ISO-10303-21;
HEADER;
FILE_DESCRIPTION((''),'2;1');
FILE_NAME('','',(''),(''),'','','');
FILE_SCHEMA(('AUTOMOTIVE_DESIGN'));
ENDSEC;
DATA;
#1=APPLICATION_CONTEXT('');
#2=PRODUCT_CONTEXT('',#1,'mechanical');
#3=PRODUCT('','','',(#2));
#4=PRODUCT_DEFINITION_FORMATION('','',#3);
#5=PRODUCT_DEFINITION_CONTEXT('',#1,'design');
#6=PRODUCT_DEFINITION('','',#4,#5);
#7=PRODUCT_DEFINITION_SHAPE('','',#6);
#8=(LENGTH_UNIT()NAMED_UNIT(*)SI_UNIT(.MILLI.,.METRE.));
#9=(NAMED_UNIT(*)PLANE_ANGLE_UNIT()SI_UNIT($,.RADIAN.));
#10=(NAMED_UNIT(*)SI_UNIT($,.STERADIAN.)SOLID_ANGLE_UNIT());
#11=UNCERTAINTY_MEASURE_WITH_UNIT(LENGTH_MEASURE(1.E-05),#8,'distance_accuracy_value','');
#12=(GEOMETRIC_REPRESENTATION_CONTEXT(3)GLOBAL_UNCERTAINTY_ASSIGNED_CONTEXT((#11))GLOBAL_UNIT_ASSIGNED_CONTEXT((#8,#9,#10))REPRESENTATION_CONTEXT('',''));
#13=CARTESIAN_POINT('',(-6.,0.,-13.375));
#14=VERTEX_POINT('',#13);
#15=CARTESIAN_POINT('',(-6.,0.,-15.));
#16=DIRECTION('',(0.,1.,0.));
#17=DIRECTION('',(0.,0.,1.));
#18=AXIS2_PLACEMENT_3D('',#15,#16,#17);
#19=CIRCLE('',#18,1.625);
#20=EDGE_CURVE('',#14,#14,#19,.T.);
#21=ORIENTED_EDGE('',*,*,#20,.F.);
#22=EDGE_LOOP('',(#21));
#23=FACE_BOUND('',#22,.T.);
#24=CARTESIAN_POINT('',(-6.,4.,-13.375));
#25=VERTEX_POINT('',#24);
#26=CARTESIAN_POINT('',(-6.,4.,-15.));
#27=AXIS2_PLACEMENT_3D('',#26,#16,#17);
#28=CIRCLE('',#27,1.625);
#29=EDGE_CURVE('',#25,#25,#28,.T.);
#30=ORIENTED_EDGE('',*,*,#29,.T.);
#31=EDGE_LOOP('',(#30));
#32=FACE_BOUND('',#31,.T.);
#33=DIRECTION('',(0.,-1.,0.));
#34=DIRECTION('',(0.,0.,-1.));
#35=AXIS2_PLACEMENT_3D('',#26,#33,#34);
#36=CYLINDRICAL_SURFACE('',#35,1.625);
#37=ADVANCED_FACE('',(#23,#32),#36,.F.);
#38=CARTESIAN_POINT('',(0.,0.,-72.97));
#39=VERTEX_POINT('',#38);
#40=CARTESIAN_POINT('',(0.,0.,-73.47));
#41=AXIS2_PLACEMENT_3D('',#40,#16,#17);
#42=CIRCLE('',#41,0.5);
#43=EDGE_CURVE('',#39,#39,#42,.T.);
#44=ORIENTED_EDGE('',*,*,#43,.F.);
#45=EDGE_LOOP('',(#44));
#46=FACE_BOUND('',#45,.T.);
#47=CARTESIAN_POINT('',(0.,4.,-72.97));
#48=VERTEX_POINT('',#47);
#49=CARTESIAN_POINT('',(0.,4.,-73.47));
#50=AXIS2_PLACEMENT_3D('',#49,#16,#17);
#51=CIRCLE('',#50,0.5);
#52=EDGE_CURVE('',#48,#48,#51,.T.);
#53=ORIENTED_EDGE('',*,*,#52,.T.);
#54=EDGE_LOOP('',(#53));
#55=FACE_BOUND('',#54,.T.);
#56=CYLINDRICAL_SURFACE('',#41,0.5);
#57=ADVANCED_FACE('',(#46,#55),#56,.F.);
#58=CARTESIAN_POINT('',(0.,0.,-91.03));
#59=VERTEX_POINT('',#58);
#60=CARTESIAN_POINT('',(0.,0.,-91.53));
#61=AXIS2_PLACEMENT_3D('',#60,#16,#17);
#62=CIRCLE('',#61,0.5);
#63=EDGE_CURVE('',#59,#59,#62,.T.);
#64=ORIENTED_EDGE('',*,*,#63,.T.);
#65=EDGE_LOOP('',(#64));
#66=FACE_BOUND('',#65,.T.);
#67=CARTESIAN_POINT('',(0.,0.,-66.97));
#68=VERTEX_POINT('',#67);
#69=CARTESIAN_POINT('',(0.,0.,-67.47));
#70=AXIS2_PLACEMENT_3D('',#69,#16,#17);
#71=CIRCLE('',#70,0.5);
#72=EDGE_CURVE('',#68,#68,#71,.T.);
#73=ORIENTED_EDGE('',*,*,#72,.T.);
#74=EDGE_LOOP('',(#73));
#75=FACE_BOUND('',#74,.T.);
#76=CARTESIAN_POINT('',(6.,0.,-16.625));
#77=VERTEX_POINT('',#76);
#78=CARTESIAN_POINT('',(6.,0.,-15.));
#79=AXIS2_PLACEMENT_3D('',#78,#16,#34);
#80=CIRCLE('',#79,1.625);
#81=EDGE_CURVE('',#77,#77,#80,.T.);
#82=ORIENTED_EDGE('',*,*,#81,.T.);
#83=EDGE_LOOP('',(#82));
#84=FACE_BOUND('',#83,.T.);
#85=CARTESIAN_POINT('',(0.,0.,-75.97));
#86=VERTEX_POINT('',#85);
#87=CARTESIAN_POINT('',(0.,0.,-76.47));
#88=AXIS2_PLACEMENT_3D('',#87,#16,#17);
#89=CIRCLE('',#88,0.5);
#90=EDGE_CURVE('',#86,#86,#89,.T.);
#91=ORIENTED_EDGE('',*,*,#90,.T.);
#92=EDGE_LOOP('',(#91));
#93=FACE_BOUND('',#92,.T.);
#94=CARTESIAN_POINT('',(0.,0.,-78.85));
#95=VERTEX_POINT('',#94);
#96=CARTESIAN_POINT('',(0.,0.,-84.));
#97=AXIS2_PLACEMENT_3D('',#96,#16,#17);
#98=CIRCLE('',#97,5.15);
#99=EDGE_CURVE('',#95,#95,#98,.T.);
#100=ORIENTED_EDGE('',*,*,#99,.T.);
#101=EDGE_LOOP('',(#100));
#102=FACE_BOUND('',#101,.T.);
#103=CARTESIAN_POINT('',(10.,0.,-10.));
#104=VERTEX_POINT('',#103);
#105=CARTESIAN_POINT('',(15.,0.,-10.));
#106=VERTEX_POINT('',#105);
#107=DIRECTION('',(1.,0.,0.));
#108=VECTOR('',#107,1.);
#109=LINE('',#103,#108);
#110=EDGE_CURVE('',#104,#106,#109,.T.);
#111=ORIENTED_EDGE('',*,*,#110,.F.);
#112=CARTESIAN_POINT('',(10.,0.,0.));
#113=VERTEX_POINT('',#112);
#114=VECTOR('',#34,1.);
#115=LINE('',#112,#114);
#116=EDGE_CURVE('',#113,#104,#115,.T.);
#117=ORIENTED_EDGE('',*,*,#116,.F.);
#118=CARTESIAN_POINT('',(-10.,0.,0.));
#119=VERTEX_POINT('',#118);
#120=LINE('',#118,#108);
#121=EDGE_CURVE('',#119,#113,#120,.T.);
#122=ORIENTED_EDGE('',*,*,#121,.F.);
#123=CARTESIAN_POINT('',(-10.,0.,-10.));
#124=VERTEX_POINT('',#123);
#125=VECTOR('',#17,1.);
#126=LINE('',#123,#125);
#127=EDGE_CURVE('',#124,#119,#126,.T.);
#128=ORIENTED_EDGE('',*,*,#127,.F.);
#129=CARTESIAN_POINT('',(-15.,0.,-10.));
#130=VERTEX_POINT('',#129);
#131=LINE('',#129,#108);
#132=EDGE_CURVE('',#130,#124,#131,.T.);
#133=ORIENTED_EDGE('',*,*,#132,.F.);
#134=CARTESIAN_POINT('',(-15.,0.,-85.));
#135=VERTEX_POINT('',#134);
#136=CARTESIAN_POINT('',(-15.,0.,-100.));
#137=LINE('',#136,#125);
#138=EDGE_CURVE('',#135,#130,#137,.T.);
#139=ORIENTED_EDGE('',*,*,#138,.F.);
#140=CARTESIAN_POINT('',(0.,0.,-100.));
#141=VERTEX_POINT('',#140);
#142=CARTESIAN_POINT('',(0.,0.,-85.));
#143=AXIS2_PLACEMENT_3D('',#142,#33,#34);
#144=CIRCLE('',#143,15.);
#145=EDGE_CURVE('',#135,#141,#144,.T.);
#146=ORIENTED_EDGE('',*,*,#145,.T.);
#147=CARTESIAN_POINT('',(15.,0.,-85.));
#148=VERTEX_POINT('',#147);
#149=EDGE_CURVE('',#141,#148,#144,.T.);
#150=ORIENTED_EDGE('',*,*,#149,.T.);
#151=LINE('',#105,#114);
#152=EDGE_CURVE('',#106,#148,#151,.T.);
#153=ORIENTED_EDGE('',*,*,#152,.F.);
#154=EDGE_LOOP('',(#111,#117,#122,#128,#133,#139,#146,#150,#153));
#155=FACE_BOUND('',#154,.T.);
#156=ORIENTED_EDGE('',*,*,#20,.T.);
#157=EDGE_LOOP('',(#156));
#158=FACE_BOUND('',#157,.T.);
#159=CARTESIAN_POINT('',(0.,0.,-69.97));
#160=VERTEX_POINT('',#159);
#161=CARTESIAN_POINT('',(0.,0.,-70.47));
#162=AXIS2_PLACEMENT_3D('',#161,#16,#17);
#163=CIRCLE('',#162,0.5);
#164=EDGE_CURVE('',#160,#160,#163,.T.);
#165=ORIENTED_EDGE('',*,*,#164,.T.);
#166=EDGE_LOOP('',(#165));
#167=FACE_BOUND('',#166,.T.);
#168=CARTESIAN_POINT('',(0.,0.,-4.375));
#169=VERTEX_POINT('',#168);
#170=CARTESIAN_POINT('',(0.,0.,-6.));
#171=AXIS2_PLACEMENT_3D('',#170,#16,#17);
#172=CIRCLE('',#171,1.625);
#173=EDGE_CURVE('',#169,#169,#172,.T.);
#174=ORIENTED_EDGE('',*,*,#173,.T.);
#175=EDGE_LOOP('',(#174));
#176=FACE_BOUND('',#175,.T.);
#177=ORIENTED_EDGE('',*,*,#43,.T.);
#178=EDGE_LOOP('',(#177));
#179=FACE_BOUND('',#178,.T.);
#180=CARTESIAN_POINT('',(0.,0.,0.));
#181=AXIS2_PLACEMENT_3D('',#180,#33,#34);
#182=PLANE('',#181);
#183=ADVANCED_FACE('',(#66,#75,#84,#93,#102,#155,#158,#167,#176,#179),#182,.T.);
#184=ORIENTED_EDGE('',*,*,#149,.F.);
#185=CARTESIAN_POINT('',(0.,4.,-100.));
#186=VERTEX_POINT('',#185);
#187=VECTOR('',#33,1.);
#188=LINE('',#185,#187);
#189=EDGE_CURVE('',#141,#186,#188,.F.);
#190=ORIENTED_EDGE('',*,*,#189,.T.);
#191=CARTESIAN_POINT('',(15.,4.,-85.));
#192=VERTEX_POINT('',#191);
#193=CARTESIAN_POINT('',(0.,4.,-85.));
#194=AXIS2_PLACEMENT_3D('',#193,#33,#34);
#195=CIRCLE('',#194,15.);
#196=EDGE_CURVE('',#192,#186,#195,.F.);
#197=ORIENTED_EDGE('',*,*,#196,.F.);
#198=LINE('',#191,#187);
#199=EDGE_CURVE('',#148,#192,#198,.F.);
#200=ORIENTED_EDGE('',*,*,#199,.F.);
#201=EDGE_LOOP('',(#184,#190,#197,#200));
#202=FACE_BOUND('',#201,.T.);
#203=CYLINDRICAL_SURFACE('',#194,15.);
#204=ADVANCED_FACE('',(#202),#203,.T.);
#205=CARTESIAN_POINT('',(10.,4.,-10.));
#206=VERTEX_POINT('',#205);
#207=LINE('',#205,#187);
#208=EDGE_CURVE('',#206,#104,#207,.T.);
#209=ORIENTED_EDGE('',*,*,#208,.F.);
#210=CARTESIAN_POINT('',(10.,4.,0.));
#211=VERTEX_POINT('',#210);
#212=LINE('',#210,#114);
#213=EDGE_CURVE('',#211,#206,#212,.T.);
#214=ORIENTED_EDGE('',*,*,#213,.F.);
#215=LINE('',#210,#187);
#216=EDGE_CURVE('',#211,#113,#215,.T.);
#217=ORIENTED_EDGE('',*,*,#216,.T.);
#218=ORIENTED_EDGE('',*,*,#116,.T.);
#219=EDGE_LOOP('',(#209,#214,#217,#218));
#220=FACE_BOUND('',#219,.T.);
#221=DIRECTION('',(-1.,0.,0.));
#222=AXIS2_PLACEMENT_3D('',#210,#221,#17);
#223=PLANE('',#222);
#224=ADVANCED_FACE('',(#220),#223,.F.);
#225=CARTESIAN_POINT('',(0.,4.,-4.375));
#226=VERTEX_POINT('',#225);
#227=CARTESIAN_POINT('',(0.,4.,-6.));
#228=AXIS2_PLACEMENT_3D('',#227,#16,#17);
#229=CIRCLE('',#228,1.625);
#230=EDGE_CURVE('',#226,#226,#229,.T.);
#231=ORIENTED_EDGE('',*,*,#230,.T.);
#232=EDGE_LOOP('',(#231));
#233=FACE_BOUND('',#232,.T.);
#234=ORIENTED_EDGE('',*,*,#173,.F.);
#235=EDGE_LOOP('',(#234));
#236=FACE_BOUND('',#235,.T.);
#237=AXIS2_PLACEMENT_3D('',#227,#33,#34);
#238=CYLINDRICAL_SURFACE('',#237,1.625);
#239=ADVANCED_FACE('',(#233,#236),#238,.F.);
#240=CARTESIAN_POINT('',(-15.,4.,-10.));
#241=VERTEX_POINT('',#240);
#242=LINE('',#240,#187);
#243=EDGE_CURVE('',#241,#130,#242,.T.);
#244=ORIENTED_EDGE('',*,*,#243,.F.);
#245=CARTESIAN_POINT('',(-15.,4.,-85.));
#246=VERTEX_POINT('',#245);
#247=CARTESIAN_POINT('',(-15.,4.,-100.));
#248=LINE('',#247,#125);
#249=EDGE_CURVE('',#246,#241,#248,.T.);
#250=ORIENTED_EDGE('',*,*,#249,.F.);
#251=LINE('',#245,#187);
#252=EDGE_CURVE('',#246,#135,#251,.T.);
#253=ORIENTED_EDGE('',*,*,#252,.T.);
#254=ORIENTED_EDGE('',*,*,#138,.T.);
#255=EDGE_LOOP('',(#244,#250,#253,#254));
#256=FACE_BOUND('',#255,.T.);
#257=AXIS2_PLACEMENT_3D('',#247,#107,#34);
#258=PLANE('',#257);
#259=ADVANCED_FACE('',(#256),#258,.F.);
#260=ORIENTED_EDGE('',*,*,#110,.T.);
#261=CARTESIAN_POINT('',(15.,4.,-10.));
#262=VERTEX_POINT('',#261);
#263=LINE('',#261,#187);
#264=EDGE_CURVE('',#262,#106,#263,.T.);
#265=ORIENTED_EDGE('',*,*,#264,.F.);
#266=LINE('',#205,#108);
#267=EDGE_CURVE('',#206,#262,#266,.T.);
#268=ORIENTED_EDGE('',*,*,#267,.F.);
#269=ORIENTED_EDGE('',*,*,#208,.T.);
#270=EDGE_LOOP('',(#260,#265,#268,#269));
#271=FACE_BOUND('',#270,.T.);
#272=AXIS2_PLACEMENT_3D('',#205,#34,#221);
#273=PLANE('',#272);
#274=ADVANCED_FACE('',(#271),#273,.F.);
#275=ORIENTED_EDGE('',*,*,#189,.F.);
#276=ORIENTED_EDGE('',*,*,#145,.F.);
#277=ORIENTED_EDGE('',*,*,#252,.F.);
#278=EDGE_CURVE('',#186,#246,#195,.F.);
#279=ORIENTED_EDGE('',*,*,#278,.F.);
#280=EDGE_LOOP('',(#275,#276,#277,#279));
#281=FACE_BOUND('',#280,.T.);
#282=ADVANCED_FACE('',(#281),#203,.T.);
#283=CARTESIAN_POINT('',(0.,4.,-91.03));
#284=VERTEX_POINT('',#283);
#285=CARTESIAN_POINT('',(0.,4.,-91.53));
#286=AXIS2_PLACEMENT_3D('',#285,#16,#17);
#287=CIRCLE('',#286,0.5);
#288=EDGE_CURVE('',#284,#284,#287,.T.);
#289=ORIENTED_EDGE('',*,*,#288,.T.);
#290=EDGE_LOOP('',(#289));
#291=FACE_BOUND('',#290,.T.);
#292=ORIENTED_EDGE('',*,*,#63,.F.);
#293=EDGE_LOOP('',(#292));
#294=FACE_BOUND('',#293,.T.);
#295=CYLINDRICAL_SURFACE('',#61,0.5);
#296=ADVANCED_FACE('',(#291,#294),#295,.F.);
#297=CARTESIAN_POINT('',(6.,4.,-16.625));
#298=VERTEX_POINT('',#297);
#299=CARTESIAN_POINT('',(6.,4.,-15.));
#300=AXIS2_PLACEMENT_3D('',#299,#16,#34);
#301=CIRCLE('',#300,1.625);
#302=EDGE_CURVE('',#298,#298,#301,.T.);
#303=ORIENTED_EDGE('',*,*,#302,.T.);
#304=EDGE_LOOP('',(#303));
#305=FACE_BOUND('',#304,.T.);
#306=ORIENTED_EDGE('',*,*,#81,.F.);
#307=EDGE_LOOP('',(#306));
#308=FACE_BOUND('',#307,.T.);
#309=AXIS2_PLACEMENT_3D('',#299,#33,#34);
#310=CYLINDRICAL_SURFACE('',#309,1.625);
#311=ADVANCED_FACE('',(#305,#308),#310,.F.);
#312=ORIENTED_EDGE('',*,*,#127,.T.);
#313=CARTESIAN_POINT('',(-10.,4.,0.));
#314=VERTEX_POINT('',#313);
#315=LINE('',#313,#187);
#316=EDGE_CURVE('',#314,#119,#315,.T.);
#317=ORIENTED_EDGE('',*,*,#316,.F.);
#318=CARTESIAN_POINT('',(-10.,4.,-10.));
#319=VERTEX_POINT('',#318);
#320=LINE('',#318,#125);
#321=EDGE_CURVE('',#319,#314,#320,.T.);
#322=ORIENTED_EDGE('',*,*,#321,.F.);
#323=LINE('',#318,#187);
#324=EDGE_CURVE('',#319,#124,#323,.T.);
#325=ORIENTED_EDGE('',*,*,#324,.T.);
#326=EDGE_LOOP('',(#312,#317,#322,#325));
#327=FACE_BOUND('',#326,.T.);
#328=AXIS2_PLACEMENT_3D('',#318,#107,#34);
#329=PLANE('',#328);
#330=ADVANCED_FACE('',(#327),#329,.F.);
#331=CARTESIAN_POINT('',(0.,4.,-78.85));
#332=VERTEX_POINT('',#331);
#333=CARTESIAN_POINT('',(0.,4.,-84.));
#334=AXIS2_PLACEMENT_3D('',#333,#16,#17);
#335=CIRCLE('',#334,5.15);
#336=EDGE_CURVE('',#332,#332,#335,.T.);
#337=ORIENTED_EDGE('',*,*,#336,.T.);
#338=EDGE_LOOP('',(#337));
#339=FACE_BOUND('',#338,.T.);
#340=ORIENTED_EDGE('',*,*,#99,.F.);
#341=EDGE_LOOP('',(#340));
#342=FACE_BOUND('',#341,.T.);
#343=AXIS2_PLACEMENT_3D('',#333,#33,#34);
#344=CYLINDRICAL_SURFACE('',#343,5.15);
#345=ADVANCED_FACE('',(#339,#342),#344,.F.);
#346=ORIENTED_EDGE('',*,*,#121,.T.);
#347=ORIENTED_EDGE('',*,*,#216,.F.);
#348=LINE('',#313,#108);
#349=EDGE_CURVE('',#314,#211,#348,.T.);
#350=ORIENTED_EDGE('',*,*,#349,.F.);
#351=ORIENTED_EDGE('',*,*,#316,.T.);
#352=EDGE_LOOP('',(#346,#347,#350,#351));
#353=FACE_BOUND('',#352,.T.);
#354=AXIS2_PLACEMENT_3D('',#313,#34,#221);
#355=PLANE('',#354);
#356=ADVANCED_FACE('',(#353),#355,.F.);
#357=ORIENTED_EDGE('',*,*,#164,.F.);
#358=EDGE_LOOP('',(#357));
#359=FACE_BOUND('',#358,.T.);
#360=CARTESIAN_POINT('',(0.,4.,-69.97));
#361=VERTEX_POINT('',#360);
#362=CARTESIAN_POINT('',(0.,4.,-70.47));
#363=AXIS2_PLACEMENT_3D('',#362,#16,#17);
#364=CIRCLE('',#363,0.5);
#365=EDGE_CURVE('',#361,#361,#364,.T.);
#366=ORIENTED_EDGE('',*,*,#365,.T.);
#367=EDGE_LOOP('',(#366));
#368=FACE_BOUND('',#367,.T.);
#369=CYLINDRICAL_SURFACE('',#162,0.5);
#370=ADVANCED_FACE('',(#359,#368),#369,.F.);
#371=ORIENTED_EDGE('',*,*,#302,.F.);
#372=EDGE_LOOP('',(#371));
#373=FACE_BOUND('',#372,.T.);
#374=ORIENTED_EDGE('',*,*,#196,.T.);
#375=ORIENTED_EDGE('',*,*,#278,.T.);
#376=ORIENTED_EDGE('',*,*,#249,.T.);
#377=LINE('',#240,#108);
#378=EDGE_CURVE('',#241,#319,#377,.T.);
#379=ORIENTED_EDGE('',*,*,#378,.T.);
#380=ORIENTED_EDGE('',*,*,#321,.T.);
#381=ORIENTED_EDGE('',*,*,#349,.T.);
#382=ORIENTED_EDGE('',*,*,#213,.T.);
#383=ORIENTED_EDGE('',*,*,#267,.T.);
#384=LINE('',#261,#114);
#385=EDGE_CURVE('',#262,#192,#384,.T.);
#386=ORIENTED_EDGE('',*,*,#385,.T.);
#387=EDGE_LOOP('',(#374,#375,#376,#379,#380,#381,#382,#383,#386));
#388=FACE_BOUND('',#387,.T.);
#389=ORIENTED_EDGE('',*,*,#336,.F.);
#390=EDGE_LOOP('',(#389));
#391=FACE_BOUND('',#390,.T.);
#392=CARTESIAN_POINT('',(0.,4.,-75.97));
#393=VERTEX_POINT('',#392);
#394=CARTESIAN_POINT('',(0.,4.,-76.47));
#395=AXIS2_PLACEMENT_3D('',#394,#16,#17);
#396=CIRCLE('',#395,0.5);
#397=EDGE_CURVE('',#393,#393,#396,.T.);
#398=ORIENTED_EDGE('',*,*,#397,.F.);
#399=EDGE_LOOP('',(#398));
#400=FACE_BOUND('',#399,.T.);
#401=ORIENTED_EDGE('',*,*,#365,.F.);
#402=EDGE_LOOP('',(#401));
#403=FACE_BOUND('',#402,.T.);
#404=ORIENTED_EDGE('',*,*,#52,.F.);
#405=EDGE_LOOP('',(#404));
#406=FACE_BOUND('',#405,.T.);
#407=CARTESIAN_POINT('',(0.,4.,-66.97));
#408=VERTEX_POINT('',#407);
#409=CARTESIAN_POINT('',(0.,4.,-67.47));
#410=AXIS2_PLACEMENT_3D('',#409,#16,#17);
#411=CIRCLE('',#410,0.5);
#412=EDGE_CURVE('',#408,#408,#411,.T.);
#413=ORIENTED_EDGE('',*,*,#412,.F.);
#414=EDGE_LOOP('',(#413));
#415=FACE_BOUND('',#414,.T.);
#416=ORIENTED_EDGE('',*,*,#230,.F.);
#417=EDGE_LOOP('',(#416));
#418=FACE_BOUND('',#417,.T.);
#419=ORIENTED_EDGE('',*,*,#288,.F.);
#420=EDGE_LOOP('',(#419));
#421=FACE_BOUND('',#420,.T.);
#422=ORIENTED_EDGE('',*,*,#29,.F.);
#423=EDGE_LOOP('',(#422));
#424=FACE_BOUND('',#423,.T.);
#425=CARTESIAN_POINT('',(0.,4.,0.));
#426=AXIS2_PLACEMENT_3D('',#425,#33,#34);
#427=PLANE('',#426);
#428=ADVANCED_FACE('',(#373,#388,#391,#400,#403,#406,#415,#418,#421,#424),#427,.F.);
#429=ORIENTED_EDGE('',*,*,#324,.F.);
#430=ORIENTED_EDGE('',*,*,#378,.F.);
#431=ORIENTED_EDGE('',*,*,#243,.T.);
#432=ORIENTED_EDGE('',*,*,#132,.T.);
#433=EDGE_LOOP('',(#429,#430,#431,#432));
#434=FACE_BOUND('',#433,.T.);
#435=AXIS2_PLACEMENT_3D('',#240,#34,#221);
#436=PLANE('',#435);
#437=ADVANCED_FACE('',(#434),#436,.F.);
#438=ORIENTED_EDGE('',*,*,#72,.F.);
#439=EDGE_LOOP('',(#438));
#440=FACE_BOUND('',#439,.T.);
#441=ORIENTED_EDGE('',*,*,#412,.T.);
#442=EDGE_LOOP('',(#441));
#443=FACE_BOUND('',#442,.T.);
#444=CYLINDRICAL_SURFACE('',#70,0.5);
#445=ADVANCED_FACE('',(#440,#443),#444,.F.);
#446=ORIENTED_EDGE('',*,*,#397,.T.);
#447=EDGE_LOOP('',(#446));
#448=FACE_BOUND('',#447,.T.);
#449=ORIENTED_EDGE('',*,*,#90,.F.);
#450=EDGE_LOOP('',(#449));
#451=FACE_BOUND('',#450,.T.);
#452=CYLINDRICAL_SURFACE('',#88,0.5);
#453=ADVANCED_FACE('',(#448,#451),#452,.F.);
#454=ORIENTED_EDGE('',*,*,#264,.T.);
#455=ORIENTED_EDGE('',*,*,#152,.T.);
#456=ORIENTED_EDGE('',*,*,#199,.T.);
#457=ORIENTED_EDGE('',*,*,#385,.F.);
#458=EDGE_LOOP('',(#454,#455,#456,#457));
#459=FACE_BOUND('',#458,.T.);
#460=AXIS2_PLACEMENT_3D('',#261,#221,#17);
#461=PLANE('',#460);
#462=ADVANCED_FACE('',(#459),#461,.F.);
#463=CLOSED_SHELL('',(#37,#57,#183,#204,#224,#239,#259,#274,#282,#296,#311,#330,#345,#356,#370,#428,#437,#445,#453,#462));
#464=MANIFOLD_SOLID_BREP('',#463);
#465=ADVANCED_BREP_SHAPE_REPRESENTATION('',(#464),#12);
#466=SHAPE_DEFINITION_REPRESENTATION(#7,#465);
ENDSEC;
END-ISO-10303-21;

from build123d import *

# Parameters (mm, degrees)
SKETCH_1_R          = 1.625
SKETCH_1_R_2        = 5.15
EXTRUDE_1_DEPTH     = 4
FILLET_1_R          = 15
SKETCH_3_R          = 0.5
CUT_EXTRUDE_1_DEPTH = 102.197826064


with BuildPart() as part:
    # Эскиз1 → Бобышка-Вытянуть1 (new body)
    with BuildSketch(Plane(origin=(0, 0, 0), x_dir=(1, 0, 0), z_dir=(0, 1, 0))):
        Polygon((-10, 0), (10, 0), (10, 10), (15, 10), (15, 100), (-15, 100), (-15, 10), (-10, 10), align=None)
        with Locations(Location((-6, 15, 0), (0, 0, 270))):
            Circle(SKETCH_1_R, mode=Mode.SUBTRACT)
        with Locations(Location((0, 6, 0), (0, 0, 270))):
            Circle(SKETCH_1_R, mode=Mode.SUBTRACT)
        with Locations(Location((6, 15, 0), (0, 0, 90))):
            Circle(SKETCH_1_R, mode=Mode.SUBTRACT)
        with Locations(Location((0, 84, 0), (0, 0, 270))):
            Circle(SKETCH_1_R_2, mode=Mode.SUBTRACT)
    extrude(amount=EXTRUDE_1_DEPTH)

    # Скругление1
    fillet_1_edges = [part.edges().sort_by_distance(p)[0] for p in [
        (15, 2, -100),
        (-15, 2, -100),
    ]]
    fillet(fillet_1_edges, radius=FILLET_1_R - 0.0001)  # a hair under: the kernel refuses the full size

    # Эскиз3 → Вырез-Вытянуть1 (cut, through all)
    with BuildSketch(Plane(origin=(0, 4, 0), x_dir=(1, 0, 0), z_dir=(0, 1, 0))):
        with Locations(Location((0, 76.47, 0), (0, 0, 270))):
            Circle(SKETCH_3_R)
        with Locations(Location((0, 73.47, 0), (0, 0, 270))):
            Circle(SKETCH_3_R)
        with Locations(Location((0, 70.47, 0), (0, 0, 270))):
            Circle(SKETCH_3_R)
        with Locations(Location((0, 67.47, 0), (0, 0, 270))):
            Circle(SKETCH_3_R)
        with Locations(Location((0, 91.53, 0), (0, 0, 270))):
            Circle(SKETCH_3_R)
    extrude(amount=-CUT_EXTRUDE_1_DEPTH, mode=Mode.SUBTRACT)


solid = part.part
